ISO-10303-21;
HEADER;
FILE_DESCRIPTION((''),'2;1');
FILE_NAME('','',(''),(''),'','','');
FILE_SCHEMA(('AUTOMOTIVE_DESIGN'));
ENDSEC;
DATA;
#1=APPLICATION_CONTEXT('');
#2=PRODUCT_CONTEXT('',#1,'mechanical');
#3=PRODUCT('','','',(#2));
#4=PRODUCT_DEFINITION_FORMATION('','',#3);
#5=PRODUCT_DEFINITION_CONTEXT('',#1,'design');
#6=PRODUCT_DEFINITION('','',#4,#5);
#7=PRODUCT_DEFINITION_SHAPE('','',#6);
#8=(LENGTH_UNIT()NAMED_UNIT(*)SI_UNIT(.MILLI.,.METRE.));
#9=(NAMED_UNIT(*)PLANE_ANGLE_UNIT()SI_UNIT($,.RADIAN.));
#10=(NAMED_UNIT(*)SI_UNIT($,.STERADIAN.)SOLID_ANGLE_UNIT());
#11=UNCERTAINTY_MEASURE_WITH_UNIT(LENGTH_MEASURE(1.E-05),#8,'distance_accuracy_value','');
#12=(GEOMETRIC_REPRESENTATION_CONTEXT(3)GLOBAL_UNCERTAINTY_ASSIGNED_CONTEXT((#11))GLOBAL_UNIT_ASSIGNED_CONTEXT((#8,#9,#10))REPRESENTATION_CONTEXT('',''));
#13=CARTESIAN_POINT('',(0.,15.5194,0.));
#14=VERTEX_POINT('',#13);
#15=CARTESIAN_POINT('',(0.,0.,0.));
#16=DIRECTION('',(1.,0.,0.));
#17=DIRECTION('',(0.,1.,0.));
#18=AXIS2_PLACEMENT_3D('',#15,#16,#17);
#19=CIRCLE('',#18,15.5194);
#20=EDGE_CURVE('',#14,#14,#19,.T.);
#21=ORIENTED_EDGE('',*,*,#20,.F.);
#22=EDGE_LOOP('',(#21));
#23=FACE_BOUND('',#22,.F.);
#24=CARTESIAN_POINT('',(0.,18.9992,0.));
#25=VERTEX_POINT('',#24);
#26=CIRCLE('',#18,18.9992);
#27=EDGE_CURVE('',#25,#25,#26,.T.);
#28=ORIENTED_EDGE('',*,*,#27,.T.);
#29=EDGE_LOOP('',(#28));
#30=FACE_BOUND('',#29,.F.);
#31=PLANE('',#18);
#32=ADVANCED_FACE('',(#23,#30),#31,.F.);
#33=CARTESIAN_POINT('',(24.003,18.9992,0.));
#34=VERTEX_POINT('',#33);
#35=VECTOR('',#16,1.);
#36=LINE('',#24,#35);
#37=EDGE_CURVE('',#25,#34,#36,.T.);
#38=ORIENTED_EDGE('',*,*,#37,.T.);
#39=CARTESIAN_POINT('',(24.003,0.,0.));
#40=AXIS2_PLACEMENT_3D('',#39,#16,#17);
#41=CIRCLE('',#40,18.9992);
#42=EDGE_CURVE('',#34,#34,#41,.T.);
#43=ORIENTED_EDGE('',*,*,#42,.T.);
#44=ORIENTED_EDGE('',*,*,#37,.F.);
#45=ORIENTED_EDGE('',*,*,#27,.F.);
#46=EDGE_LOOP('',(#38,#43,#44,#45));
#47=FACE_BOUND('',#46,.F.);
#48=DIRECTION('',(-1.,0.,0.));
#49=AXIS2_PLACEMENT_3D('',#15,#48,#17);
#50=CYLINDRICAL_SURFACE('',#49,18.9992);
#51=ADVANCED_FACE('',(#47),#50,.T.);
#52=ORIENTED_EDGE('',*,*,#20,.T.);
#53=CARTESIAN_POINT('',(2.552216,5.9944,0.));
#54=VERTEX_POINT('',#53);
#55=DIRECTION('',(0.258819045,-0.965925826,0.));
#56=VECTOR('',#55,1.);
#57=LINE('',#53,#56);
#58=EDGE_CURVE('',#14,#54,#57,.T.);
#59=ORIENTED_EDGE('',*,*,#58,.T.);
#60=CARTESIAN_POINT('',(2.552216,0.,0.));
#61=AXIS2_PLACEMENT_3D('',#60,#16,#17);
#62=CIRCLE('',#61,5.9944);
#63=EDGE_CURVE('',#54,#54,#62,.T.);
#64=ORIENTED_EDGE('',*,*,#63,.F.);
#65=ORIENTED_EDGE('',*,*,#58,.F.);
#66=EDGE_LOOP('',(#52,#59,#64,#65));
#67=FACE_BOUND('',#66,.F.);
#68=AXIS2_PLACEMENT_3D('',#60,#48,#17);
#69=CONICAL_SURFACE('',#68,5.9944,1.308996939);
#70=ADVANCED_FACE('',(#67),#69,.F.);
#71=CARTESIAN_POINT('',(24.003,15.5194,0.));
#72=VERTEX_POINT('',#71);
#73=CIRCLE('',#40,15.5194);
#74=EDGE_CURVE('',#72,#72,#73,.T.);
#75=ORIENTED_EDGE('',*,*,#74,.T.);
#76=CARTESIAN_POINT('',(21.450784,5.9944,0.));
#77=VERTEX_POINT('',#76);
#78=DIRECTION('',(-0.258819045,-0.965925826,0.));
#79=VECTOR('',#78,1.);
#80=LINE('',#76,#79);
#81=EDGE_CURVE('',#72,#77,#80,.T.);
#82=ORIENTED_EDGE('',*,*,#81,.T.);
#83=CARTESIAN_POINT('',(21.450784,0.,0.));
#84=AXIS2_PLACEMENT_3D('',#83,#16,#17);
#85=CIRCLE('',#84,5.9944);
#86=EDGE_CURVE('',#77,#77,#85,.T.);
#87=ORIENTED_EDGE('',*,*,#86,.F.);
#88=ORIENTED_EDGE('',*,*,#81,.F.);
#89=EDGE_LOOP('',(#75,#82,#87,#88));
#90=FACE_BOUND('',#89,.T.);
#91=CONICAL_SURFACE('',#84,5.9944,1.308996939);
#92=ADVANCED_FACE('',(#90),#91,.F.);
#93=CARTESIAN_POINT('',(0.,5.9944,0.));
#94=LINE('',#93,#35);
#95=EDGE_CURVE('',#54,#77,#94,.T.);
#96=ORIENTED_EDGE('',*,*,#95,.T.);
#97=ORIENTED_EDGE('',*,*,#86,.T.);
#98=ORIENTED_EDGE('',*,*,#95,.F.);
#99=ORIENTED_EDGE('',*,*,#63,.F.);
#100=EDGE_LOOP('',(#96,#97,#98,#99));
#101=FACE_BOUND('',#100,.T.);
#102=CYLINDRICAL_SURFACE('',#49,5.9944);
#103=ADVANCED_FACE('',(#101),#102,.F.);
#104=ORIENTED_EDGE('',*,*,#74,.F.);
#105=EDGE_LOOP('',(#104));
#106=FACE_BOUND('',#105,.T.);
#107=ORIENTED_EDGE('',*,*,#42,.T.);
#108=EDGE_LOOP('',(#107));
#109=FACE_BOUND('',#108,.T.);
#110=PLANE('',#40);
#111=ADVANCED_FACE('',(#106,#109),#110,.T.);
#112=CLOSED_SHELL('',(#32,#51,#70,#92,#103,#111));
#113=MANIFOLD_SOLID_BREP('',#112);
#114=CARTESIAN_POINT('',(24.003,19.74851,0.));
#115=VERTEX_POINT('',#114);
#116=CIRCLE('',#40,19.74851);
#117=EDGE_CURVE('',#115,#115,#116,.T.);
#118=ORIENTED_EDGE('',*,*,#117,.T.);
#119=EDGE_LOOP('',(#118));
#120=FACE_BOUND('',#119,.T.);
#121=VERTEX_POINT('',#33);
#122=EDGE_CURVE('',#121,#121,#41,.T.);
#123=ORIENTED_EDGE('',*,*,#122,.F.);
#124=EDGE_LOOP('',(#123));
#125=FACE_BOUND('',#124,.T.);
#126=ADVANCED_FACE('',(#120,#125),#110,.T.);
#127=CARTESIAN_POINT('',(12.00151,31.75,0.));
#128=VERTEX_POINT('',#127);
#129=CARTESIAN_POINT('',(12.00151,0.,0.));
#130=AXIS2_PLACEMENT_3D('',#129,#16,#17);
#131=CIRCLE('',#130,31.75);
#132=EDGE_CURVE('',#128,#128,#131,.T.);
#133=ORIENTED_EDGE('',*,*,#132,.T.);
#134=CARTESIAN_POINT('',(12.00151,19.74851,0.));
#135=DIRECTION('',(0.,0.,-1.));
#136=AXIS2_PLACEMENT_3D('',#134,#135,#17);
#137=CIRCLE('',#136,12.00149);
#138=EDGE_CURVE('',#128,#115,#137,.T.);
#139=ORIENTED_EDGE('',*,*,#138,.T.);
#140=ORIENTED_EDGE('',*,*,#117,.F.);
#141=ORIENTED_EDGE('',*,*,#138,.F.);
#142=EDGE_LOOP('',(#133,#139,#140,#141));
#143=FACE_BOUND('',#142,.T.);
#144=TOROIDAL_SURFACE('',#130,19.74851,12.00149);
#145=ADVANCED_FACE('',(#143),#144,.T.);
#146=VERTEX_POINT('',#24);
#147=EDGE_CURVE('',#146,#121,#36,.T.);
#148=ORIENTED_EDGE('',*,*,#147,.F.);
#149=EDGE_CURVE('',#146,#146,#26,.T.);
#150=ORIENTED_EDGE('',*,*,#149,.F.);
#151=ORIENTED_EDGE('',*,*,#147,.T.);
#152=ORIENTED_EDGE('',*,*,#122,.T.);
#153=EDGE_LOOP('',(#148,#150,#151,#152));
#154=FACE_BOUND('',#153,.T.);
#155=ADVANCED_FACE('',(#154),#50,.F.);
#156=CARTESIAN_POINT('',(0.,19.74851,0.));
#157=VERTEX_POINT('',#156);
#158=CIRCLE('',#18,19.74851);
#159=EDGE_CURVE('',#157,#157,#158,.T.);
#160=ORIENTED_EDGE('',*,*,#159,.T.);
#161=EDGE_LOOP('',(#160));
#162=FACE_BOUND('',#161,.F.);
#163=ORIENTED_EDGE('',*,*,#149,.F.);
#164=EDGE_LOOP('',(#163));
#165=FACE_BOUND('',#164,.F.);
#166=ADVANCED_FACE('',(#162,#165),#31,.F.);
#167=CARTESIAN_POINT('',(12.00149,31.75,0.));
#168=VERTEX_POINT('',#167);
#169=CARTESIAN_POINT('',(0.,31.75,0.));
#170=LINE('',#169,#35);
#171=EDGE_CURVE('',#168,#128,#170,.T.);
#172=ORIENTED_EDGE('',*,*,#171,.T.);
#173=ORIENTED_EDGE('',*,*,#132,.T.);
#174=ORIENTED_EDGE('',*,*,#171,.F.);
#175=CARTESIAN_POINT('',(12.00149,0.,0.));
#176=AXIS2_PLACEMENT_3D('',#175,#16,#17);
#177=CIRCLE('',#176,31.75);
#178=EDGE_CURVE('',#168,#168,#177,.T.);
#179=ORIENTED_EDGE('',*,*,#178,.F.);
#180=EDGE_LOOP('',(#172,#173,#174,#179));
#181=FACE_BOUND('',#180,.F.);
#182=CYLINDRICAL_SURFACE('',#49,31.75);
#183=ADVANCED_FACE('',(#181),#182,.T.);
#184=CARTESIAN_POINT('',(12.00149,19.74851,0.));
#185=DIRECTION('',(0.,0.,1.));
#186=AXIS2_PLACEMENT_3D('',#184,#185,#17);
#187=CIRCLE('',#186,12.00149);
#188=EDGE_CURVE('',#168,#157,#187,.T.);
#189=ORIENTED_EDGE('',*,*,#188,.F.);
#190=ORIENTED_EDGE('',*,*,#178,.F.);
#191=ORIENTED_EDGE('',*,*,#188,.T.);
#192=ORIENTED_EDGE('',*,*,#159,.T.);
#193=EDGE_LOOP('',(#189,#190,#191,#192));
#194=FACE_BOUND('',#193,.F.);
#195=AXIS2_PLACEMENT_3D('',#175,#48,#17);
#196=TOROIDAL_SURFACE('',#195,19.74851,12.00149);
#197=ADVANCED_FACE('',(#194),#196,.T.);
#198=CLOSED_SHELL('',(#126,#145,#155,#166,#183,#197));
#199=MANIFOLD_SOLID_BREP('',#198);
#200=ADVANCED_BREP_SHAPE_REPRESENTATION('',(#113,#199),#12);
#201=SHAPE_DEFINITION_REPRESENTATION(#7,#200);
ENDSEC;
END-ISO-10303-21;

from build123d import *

# Parameters (mm, degrees)
F0_R     = 31.75
F0_R_2   = 18.9992
F1_DEPTH = 24.003
F2_R     = 12.00149
F0_R_3   = 16.002
F3_DEPTH = 24.003
F0_R_4   = 5.9944
F4_DEPTH = 24.003
F5_SIZE2 = 2.5522160579
F5_SIZE  = 9.525
F6_SIZE2 = 2.5522160579
F6_SIZE  = 9.525


# Not quite as in the source:
# - a fillet or chamfer is up to 0.001 mm smaller than in the source, because OpenCascade refuses the exact size


with BuildPart() as f1:
    # F0 (on Right) → F1 (new body)
    with BuildSketch(Plane.YZ):
        Circle(F0_R)
        Circle(F0_R_2, mode=Mode.SUBTRACT)
    extrude(amount=F1_DEPTH)

    # F2 (radius 12.0015 in the source; OpenCascade refuses exactly that, so slightly less here)
    f2_edges = [f1.edges().sort_by_distance(p)[0] for p in [
        (24.003, -31.75, 0),
        (0, -31.75, 0),
    ]]
    fillet(f2_edges, radius=F2_R)


with BuildPart() as f3:
    # F0 (on Right) → F3 (new body)
    with BuildSketch(Plane.YZ):
        Circle(F0_R_2)
        Circle(F0_R_3, mode=Mode.SUBTRACT)
    extrude(amount=F3_DEPTH)

    # F0 (on Right) → F4 (join)
    with BuildSketch(Plane.YZ):
        Circle(F0_R_3)
        Circle(F0_R_4, mode=Mode.SUBTRACT)
    extrude(amount=F4_DEPTH)

    # F5
    f5_edges = [f3.edges().sort_by_distance(p)[0] for p in [
        (24.003, -5.9944, 0),
    ]]
    f5_side = f3.faces().sort_by_distance((24.003, -18.461821, 0))[0]
    chamfer(f5_edges, length=F5_SIZE, length2=F5_SIZE2, reference=f5_side)

    # F6
    f6_edges = [f3.edges().sort_by_distance(p)[0] for p in [
        (0, -5.9944, 0),
    ]]
    f6_side = f3.faces().sort_by_distance((0, -18.461821, 0))[0]
    chamfer(f6_edges, length=F6_SIZE, length2=F6_SIZE2, reference=f6_side)


solid = Compound([f1.part, f3.part])
